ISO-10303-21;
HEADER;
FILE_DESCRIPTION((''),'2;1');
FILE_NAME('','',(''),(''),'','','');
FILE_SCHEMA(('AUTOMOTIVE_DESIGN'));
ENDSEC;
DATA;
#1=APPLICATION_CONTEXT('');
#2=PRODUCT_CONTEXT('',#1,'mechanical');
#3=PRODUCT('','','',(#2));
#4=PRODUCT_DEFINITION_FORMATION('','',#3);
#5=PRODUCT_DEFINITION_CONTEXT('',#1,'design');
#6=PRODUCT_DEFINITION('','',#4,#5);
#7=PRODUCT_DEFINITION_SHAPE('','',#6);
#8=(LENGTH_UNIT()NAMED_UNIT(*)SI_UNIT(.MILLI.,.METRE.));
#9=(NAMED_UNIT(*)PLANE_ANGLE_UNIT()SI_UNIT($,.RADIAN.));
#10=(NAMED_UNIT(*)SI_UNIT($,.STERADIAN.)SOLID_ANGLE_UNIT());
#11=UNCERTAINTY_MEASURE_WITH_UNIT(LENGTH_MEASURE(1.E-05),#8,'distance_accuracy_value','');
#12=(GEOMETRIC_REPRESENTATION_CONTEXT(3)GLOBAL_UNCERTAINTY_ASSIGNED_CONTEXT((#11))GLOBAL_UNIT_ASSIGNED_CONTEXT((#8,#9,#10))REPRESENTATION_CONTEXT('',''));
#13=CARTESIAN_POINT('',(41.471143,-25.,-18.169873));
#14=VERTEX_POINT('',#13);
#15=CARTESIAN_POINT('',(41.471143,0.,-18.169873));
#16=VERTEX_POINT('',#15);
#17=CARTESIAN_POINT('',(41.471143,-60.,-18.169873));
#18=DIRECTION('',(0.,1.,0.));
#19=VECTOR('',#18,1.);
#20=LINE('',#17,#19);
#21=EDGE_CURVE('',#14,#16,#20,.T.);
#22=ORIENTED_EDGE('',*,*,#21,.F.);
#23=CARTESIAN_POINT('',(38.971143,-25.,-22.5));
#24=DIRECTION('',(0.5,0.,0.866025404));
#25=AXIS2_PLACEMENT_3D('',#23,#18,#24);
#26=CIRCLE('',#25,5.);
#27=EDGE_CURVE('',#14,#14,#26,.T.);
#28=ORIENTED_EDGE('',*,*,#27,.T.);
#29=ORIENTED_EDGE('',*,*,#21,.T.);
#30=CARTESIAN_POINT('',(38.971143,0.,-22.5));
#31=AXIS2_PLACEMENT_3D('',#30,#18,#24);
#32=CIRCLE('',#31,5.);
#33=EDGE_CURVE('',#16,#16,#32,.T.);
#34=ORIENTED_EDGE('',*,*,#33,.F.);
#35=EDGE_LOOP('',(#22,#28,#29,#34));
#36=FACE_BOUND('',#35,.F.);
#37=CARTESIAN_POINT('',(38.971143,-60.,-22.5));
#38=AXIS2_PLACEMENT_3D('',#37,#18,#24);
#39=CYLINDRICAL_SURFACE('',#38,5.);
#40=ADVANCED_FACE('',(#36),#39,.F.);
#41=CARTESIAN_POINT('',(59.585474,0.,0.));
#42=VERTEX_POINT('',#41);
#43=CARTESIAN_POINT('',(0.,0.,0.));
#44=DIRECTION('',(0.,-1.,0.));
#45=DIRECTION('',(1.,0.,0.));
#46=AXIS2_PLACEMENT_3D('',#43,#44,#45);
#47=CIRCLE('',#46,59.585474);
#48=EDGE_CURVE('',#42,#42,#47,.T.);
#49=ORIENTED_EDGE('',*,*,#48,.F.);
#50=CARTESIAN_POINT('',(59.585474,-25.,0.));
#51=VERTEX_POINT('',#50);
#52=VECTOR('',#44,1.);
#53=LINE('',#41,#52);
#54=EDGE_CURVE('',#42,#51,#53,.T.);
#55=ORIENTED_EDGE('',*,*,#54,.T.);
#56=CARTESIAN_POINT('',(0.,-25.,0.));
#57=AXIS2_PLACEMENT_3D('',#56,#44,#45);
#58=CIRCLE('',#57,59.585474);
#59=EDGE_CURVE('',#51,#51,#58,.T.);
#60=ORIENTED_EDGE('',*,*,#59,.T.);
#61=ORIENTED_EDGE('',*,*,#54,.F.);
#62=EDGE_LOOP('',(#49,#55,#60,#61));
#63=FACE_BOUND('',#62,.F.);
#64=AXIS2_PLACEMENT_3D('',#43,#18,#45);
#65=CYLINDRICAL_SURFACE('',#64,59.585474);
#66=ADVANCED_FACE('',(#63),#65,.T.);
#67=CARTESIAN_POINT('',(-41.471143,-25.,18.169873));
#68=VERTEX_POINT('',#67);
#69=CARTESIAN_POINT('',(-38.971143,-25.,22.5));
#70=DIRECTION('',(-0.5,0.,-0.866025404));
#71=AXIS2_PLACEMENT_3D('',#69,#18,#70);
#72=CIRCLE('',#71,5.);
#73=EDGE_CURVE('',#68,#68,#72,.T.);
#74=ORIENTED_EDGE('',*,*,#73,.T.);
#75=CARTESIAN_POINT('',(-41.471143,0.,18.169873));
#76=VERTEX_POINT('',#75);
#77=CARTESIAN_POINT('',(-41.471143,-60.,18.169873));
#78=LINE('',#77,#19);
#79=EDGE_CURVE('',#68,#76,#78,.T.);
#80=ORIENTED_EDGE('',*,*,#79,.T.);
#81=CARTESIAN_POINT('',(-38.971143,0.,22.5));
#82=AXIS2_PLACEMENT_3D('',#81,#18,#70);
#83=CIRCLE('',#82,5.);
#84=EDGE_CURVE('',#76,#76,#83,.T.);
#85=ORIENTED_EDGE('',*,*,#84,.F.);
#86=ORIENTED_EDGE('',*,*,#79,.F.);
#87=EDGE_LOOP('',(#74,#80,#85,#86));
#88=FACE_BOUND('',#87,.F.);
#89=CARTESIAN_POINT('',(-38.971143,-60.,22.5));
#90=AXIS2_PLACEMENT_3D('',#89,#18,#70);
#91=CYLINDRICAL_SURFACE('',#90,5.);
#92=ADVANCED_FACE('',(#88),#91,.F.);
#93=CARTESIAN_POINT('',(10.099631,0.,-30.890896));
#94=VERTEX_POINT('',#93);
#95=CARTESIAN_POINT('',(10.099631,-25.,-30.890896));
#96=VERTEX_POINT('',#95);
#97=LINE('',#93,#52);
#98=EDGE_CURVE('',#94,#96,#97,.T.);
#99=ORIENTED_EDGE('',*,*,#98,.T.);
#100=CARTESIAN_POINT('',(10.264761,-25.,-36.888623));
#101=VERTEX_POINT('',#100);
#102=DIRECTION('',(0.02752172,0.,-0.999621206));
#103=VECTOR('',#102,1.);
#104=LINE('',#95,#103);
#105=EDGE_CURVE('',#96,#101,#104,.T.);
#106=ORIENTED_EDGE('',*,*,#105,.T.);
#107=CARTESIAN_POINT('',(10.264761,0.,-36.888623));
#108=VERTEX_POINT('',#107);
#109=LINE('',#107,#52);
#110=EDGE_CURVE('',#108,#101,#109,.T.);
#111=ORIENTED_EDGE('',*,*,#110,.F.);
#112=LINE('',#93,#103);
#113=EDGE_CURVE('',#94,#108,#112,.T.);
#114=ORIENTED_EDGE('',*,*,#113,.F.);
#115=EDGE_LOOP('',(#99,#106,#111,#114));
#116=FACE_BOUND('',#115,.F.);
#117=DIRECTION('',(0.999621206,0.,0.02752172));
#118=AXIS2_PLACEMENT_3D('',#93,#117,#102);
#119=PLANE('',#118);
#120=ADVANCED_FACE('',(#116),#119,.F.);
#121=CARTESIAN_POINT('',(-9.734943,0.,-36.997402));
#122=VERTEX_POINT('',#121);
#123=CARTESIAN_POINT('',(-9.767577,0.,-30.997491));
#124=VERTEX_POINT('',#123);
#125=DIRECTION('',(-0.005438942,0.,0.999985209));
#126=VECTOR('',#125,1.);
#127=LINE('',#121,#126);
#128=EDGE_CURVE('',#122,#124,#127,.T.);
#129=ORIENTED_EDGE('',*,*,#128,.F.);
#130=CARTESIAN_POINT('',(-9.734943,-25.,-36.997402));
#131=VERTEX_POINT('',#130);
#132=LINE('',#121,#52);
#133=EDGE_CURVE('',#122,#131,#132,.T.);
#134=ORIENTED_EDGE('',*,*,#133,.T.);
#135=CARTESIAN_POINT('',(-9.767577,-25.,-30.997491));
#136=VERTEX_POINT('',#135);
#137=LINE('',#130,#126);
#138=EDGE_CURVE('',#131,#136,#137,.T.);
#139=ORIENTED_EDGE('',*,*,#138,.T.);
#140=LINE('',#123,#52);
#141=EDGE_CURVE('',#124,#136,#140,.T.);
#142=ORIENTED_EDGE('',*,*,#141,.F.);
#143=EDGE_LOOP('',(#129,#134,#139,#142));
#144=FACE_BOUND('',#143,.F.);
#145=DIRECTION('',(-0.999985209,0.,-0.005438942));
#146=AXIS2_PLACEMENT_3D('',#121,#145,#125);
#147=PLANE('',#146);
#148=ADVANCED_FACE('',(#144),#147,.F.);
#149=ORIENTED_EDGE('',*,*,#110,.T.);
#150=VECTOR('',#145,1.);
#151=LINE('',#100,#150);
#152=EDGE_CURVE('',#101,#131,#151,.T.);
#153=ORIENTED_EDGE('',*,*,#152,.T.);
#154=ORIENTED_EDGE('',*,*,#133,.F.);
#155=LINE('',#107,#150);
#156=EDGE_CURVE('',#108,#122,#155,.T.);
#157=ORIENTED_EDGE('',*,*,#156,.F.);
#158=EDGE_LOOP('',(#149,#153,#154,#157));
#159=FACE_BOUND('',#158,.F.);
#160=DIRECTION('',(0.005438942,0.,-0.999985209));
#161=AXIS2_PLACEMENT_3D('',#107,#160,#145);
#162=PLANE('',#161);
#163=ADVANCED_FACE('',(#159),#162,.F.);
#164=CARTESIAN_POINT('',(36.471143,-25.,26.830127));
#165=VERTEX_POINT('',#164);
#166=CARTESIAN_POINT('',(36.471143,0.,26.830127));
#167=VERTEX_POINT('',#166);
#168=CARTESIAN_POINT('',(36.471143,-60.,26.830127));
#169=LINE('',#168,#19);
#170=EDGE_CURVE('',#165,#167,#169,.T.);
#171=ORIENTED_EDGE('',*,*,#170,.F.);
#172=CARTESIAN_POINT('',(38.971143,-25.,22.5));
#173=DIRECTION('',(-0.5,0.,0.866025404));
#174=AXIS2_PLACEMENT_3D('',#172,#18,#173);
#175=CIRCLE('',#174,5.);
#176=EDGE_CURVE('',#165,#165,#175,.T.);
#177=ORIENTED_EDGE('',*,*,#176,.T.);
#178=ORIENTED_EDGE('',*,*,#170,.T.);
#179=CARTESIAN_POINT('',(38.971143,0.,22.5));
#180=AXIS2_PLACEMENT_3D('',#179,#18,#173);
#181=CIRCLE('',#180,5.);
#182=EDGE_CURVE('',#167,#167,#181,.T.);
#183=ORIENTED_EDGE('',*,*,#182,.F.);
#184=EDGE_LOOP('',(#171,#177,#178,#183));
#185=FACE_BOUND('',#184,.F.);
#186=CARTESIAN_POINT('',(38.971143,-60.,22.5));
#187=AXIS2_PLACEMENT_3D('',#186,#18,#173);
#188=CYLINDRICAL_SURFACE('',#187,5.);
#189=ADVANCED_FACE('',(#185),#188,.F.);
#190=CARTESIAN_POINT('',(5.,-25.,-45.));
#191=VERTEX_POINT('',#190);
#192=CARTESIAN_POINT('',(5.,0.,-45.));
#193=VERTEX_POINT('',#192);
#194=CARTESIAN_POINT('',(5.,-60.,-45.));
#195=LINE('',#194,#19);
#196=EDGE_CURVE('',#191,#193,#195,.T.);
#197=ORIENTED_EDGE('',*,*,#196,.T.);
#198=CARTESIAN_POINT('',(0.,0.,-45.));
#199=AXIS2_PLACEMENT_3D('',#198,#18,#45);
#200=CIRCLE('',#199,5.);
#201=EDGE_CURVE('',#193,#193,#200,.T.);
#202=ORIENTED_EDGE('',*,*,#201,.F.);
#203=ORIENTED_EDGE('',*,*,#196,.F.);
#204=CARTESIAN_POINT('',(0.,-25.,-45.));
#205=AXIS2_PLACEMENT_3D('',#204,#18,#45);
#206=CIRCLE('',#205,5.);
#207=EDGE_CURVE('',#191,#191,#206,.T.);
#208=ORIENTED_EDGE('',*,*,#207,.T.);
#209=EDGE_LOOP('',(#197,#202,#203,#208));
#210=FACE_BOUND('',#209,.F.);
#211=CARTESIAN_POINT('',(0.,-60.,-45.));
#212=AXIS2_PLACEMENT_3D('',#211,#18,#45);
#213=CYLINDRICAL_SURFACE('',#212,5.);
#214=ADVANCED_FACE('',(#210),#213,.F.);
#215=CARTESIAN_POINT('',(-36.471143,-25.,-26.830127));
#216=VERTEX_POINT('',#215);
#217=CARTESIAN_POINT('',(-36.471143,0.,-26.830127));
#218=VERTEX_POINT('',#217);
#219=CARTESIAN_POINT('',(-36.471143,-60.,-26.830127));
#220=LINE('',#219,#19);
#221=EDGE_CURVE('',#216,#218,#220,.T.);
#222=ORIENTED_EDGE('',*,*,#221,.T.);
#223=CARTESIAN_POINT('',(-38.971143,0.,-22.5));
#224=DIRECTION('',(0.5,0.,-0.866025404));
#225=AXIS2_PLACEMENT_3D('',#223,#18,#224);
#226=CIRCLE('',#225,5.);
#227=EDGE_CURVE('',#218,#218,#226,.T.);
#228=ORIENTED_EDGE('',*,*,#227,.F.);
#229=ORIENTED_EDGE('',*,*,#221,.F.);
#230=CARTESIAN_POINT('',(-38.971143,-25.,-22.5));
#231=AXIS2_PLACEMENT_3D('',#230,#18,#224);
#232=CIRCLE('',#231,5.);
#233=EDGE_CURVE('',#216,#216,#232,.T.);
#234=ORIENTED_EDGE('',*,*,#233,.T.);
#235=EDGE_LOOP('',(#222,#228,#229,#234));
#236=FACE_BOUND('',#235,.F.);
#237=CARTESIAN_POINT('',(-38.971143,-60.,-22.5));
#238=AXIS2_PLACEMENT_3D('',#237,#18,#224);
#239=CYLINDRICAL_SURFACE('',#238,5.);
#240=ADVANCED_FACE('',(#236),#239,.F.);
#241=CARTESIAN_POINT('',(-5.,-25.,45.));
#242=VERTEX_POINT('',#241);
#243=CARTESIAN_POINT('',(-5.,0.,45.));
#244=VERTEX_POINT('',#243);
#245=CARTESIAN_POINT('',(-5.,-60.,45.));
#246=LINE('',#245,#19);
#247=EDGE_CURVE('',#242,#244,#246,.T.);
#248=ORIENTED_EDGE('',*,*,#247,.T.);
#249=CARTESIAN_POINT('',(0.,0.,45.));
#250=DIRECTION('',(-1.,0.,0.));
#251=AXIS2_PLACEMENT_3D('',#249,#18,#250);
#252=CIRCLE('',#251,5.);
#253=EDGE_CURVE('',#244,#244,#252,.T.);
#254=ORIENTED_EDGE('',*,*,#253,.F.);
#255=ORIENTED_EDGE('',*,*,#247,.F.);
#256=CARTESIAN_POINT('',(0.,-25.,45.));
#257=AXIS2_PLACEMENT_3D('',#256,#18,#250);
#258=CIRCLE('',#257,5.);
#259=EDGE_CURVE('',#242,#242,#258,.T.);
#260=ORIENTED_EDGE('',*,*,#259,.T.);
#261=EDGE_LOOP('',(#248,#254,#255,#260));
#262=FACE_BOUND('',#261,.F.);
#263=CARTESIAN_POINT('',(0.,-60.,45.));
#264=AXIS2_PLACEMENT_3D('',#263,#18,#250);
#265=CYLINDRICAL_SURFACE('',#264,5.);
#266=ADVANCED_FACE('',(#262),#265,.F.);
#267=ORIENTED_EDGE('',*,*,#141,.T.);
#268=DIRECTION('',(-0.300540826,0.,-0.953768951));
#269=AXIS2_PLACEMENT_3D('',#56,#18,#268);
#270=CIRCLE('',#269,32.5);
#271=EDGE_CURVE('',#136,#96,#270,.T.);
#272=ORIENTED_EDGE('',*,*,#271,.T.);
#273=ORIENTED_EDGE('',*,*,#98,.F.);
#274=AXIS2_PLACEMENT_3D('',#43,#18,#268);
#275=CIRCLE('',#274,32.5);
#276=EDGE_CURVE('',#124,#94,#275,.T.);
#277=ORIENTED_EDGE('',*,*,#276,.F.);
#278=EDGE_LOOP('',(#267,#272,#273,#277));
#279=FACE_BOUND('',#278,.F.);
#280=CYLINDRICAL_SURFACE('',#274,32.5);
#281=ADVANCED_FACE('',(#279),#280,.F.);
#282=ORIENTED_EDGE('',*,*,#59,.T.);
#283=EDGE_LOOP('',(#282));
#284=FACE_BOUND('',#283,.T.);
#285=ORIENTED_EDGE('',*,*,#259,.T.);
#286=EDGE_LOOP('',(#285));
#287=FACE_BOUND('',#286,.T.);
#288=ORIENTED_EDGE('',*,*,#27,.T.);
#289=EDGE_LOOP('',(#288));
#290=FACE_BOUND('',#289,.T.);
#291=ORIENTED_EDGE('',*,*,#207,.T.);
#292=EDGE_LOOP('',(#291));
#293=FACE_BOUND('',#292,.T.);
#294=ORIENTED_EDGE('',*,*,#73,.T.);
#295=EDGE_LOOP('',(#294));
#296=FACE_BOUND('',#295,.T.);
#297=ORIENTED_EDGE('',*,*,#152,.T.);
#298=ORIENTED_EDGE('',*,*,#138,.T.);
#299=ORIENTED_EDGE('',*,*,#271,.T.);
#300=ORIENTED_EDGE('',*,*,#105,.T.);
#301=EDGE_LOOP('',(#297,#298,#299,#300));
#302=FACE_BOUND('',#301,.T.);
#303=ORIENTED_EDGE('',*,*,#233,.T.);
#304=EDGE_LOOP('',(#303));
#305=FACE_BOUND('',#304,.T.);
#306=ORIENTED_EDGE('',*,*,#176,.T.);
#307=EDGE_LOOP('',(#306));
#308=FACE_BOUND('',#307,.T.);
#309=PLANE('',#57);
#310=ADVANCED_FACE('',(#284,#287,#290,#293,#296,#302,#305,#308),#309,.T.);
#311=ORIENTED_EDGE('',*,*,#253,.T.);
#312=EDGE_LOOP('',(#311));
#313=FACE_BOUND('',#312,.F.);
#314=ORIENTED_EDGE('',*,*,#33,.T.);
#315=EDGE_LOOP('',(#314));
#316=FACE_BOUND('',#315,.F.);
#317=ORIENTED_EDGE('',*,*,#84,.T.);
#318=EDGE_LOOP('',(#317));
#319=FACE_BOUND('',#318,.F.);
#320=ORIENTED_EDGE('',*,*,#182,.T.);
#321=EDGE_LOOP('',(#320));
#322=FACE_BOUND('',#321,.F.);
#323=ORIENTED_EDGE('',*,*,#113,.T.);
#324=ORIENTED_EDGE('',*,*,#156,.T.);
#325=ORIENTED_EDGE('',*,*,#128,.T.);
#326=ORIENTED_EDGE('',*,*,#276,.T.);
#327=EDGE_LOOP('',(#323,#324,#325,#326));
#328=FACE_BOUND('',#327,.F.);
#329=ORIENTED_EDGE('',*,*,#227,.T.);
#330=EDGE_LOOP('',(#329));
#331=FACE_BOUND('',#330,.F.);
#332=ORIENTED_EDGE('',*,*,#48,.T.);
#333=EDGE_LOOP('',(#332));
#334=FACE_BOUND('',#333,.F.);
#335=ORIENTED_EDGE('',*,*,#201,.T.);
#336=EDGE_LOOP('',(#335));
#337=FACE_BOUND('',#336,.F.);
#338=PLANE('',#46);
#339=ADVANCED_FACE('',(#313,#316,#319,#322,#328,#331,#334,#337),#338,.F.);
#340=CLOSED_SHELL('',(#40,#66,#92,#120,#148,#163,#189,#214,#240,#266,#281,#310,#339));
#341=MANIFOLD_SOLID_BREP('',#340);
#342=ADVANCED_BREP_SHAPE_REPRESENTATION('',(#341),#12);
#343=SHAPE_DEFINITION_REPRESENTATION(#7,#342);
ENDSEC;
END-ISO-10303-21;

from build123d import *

# Parameters (mm, degrees)
F0_R            = 59.5854737817
F0_R_2          = 5
F1_DEPTH        = 25
F3_D            = 10
F3_DEPTH        = 35
F3_TIP          = 3.0043030951
F3_COPIES_COUNT = 6


# Not quite as in the source:
# - a pattern or mirror of a feature is missing from the dataset's text; its kind, count and spacing are read off the source's solid


with BuildPart() as f1:
    # F0 (on Front) → F1 (new body)
    with BuildSketch(Plane.XZ):
        Circle(F0_R)
        with BuildLine():
            Line((-9.7349431967, -36.997402159), (-9.7675768508, -30.9974909059))
            ThreePointArc((-9.7675768508, -30.9974909059), (-0.1743718668, 32.499532219), (10.099630663, -30.8908960775))
            Line((10.099630663, -30.8908960775), (10.2647609802, -36.8886233119))
            Line((10.2647609802, -36.8886233119), (-9.7349431967, -36.997402159))
        make_face(mode=Mode.SUBTRACT)
        with Locations((0, 45)):
            Circle(F0_R_2, mode=Mode.SUBTRACT)
        with Locations((0, 45)):
            Circle(F0_R_2)
    extrude(amount=F1_DEPTH)

    # F3
    with Locations(Plane.XZ.offset(25)):
        with Locations((0, 45)):
            f3 = Hole(F3_D / 2, depth=F3_DEPTH)
            with Locations((0, 0, -(F3_DEPTH + F3_TIP / 2))):  # 118° drill point
                Cone(0, F3_D / 2, F3_TIP, mode=Mode.SUBTRACT)

    # F3_copies: F3 ×6 about axis
    f3_copies_axis = Axis((0, 0, 0), (0, 1, 0))
    for i in range(1, F3_COPIES_COUNT):
        add(f3.rotate(f3_copies_axis, i * 360 / F3_COPIES_COUNT), mode=Mode.SUBTRACT)


solid = f1.part
